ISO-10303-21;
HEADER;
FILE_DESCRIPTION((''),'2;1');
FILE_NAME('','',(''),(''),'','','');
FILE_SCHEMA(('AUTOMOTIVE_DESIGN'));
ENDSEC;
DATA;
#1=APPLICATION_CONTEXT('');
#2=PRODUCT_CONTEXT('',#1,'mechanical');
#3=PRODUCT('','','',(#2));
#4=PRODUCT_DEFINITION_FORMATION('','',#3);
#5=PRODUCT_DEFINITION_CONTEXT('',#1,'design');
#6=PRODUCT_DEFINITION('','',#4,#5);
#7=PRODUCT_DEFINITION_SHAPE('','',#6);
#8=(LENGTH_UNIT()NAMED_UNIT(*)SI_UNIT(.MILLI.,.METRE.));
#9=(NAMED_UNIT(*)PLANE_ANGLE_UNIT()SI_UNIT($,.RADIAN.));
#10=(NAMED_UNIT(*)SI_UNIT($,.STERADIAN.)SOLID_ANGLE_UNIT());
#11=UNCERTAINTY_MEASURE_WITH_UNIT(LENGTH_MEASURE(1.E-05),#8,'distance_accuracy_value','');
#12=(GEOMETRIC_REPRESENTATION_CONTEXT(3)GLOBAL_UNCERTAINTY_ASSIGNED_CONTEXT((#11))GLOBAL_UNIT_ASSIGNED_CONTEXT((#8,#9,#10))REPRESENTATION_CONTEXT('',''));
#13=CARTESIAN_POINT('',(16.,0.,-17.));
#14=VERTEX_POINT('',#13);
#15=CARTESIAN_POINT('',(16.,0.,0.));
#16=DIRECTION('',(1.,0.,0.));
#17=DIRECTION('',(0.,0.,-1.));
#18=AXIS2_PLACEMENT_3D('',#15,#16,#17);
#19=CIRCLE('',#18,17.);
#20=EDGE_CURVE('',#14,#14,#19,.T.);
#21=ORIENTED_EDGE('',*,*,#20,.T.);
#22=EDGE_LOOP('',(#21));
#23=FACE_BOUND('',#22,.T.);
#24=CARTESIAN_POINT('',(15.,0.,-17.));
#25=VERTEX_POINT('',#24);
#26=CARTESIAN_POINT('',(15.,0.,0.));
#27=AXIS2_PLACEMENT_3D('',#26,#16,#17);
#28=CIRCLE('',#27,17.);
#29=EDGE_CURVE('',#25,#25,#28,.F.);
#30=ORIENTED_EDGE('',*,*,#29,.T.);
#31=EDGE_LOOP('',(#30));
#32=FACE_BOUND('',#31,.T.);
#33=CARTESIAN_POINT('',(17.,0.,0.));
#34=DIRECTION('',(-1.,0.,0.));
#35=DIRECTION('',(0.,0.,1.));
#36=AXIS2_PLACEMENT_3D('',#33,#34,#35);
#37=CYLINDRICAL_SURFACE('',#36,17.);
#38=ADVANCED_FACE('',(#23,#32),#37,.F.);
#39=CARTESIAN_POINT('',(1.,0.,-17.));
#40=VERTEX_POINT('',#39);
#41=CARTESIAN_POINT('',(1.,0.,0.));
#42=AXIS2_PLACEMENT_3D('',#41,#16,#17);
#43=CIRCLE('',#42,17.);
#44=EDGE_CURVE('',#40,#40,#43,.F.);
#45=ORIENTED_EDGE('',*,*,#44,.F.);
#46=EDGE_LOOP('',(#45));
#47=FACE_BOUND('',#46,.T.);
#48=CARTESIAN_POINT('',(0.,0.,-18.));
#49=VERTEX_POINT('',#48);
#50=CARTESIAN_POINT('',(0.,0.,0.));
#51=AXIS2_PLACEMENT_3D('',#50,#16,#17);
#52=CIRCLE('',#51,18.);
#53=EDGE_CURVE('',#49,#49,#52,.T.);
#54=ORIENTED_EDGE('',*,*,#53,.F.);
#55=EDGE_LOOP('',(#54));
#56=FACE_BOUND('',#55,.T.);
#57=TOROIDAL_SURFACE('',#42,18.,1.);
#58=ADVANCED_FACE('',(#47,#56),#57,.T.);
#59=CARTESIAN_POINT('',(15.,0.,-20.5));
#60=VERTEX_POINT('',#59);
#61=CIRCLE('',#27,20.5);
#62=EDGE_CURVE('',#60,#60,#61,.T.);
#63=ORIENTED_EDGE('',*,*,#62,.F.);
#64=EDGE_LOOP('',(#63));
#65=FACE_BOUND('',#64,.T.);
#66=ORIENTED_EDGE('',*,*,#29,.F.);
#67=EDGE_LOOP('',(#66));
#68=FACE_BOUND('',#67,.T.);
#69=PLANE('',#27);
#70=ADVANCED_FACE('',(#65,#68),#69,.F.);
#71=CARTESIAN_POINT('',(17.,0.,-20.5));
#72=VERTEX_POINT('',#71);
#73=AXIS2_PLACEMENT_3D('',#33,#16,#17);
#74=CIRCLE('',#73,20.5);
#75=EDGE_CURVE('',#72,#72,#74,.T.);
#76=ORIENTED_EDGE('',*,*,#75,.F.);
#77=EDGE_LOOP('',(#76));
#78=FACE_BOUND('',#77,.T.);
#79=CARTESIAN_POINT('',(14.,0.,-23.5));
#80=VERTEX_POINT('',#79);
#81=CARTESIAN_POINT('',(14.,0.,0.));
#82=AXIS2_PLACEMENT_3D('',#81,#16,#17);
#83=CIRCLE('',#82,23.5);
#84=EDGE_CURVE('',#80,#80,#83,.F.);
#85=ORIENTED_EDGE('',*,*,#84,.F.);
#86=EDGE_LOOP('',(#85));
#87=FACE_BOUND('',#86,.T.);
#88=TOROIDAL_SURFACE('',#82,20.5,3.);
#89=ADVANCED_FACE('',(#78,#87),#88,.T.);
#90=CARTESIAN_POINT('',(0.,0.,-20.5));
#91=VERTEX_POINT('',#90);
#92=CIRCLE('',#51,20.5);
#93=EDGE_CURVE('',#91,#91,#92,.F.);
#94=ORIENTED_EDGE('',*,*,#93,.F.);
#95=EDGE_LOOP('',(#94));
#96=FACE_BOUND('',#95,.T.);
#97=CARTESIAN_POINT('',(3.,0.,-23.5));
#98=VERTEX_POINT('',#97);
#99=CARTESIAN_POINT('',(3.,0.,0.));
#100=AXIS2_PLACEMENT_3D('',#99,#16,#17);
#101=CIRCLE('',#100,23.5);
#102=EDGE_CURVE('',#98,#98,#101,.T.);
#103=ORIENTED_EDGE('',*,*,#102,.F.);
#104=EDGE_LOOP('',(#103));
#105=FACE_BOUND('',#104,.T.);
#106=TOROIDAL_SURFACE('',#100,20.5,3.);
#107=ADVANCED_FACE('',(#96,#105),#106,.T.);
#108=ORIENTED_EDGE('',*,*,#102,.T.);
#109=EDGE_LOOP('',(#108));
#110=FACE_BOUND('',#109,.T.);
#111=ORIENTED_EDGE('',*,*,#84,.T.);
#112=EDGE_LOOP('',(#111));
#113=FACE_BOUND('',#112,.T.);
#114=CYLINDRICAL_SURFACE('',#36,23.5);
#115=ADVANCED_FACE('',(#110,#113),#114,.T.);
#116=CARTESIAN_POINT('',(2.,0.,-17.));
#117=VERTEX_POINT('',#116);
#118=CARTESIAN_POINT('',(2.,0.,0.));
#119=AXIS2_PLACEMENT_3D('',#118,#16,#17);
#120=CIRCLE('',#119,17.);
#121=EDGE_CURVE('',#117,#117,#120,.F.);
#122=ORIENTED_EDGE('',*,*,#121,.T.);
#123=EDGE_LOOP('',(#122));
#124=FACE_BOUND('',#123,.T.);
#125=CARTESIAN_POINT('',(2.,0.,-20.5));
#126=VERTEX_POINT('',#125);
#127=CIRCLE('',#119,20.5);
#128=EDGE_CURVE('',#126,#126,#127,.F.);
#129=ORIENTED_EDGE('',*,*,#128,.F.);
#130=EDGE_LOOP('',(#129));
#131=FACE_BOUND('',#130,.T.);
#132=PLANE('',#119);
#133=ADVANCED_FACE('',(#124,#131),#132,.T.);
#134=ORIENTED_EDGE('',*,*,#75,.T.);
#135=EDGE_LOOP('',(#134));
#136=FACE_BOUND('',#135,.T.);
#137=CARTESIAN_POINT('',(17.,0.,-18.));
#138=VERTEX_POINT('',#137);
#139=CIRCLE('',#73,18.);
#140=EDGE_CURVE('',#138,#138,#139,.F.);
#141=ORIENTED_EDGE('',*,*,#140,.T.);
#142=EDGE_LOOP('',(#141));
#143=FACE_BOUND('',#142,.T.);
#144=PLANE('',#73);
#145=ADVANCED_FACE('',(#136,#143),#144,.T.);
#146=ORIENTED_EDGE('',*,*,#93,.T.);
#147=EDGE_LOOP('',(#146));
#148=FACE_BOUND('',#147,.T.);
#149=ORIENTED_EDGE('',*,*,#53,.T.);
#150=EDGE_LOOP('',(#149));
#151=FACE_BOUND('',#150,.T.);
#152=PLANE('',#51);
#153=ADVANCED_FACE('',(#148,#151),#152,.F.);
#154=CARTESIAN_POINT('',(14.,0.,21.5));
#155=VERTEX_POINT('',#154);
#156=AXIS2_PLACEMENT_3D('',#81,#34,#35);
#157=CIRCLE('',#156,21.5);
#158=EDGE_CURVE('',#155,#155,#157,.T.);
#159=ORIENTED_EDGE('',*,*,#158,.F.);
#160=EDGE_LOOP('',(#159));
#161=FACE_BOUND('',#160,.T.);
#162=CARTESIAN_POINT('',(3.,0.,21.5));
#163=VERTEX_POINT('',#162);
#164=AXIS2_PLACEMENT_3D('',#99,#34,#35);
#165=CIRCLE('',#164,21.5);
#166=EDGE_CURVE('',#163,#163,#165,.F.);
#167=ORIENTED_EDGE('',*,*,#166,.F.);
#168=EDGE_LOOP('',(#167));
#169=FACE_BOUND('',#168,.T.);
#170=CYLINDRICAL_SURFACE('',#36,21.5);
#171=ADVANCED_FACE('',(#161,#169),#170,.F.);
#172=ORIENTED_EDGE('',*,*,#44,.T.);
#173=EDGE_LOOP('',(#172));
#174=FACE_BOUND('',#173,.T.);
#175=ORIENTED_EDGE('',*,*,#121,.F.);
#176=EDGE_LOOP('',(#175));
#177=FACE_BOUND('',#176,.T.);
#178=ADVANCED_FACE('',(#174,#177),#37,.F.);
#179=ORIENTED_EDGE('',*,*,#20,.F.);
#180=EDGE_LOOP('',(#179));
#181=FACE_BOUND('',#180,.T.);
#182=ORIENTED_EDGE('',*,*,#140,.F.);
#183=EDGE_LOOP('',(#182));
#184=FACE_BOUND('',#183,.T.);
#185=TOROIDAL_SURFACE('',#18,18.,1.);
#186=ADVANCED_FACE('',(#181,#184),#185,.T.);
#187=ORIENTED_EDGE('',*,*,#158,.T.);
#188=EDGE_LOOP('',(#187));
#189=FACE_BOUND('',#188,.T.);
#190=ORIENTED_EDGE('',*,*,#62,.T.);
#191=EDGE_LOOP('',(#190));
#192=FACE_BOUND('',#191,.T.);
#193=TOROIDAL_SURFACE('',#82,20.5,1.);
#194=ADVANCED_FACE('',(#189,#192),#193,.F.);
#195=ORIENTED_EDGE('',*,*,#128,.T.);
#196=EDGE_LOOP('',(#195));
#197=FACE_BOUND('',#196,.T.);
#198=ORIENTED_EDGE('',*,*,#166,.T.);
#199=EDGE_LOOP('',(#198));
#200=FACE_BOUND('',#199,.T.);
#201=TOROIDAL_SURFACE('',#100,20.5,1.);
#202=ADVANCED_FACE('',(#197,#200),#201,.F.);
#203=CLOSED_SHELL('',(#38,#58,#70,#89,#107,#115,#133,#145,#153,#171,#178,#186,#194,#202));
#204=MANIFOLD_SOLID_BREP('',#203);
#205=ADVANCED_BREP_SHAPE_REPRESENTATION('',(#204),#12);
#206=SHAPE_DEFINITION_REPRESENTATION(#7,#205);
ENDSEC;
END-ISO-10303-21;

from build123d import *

# Parameters (mm, degrees)
SKETCH1_R           = 23.5
SKETCH1_R_2         = 17
BOSS_EXTRUDE2_DEPTH = 17
FILLET1_R           = 3
FILLET2_R           = 1


# Read off the part's stored shape, not the designer's step: Shell1
with BuildPart() as part:
    # Sketch1 → Boss-Extrude2 (new body)
    with BuildSketch(Plane(origin=(0, 0, 0), x_dir=(0, 0, -1), z_dir=(1, 0, 0))):
        Circle(SKETCH1_R)
        Circle(SKETCH1_R_2, mode=Mode.SUBTRACT)
    extrude(amount=BOSS_EXTRUDE2_DEPTH)

    # Fillet1
    fillet1_edges = [part.edges().sort_by_distance(p)[0] for p in [
        (0, 0, 23.5),
        (17, 0, 23.5),
    ]]
    fillet(fillet1_edges, radius=FILLET1_R)

    # Fillet2
    fillet2_edges = [part.edges().sort_by_distance(p)[0] for p in [
        (0, 0, 17),
        (17, 0, 17),
    ]]
    fillet(fillet2_edges, radius=FILLET2_R)

    # Shell1 outline → Shell1 (revolve, cut)
    with BuildSketch(Plane.YX):
        with BuildLine():
            Line((20.5, 15), (17, 15))
            Line((17, 15), (17, 2))
            Line((17, 2), (20.5, 2))
            ThreePointArc((20.5, 2), (21.207106781, 2.292893219), (21.5, 3))
            Line((21.5, 3), (21.5, 14))
            ThreePointArc((21.5, 14), (21.207106781, 14.707106781), (20.5, 15))
        make_face()
    revolve(axis=Axis((0, 0, 0), (1, 0, 0)), mode=Mode.SUBTRACT)


solid = part.part
